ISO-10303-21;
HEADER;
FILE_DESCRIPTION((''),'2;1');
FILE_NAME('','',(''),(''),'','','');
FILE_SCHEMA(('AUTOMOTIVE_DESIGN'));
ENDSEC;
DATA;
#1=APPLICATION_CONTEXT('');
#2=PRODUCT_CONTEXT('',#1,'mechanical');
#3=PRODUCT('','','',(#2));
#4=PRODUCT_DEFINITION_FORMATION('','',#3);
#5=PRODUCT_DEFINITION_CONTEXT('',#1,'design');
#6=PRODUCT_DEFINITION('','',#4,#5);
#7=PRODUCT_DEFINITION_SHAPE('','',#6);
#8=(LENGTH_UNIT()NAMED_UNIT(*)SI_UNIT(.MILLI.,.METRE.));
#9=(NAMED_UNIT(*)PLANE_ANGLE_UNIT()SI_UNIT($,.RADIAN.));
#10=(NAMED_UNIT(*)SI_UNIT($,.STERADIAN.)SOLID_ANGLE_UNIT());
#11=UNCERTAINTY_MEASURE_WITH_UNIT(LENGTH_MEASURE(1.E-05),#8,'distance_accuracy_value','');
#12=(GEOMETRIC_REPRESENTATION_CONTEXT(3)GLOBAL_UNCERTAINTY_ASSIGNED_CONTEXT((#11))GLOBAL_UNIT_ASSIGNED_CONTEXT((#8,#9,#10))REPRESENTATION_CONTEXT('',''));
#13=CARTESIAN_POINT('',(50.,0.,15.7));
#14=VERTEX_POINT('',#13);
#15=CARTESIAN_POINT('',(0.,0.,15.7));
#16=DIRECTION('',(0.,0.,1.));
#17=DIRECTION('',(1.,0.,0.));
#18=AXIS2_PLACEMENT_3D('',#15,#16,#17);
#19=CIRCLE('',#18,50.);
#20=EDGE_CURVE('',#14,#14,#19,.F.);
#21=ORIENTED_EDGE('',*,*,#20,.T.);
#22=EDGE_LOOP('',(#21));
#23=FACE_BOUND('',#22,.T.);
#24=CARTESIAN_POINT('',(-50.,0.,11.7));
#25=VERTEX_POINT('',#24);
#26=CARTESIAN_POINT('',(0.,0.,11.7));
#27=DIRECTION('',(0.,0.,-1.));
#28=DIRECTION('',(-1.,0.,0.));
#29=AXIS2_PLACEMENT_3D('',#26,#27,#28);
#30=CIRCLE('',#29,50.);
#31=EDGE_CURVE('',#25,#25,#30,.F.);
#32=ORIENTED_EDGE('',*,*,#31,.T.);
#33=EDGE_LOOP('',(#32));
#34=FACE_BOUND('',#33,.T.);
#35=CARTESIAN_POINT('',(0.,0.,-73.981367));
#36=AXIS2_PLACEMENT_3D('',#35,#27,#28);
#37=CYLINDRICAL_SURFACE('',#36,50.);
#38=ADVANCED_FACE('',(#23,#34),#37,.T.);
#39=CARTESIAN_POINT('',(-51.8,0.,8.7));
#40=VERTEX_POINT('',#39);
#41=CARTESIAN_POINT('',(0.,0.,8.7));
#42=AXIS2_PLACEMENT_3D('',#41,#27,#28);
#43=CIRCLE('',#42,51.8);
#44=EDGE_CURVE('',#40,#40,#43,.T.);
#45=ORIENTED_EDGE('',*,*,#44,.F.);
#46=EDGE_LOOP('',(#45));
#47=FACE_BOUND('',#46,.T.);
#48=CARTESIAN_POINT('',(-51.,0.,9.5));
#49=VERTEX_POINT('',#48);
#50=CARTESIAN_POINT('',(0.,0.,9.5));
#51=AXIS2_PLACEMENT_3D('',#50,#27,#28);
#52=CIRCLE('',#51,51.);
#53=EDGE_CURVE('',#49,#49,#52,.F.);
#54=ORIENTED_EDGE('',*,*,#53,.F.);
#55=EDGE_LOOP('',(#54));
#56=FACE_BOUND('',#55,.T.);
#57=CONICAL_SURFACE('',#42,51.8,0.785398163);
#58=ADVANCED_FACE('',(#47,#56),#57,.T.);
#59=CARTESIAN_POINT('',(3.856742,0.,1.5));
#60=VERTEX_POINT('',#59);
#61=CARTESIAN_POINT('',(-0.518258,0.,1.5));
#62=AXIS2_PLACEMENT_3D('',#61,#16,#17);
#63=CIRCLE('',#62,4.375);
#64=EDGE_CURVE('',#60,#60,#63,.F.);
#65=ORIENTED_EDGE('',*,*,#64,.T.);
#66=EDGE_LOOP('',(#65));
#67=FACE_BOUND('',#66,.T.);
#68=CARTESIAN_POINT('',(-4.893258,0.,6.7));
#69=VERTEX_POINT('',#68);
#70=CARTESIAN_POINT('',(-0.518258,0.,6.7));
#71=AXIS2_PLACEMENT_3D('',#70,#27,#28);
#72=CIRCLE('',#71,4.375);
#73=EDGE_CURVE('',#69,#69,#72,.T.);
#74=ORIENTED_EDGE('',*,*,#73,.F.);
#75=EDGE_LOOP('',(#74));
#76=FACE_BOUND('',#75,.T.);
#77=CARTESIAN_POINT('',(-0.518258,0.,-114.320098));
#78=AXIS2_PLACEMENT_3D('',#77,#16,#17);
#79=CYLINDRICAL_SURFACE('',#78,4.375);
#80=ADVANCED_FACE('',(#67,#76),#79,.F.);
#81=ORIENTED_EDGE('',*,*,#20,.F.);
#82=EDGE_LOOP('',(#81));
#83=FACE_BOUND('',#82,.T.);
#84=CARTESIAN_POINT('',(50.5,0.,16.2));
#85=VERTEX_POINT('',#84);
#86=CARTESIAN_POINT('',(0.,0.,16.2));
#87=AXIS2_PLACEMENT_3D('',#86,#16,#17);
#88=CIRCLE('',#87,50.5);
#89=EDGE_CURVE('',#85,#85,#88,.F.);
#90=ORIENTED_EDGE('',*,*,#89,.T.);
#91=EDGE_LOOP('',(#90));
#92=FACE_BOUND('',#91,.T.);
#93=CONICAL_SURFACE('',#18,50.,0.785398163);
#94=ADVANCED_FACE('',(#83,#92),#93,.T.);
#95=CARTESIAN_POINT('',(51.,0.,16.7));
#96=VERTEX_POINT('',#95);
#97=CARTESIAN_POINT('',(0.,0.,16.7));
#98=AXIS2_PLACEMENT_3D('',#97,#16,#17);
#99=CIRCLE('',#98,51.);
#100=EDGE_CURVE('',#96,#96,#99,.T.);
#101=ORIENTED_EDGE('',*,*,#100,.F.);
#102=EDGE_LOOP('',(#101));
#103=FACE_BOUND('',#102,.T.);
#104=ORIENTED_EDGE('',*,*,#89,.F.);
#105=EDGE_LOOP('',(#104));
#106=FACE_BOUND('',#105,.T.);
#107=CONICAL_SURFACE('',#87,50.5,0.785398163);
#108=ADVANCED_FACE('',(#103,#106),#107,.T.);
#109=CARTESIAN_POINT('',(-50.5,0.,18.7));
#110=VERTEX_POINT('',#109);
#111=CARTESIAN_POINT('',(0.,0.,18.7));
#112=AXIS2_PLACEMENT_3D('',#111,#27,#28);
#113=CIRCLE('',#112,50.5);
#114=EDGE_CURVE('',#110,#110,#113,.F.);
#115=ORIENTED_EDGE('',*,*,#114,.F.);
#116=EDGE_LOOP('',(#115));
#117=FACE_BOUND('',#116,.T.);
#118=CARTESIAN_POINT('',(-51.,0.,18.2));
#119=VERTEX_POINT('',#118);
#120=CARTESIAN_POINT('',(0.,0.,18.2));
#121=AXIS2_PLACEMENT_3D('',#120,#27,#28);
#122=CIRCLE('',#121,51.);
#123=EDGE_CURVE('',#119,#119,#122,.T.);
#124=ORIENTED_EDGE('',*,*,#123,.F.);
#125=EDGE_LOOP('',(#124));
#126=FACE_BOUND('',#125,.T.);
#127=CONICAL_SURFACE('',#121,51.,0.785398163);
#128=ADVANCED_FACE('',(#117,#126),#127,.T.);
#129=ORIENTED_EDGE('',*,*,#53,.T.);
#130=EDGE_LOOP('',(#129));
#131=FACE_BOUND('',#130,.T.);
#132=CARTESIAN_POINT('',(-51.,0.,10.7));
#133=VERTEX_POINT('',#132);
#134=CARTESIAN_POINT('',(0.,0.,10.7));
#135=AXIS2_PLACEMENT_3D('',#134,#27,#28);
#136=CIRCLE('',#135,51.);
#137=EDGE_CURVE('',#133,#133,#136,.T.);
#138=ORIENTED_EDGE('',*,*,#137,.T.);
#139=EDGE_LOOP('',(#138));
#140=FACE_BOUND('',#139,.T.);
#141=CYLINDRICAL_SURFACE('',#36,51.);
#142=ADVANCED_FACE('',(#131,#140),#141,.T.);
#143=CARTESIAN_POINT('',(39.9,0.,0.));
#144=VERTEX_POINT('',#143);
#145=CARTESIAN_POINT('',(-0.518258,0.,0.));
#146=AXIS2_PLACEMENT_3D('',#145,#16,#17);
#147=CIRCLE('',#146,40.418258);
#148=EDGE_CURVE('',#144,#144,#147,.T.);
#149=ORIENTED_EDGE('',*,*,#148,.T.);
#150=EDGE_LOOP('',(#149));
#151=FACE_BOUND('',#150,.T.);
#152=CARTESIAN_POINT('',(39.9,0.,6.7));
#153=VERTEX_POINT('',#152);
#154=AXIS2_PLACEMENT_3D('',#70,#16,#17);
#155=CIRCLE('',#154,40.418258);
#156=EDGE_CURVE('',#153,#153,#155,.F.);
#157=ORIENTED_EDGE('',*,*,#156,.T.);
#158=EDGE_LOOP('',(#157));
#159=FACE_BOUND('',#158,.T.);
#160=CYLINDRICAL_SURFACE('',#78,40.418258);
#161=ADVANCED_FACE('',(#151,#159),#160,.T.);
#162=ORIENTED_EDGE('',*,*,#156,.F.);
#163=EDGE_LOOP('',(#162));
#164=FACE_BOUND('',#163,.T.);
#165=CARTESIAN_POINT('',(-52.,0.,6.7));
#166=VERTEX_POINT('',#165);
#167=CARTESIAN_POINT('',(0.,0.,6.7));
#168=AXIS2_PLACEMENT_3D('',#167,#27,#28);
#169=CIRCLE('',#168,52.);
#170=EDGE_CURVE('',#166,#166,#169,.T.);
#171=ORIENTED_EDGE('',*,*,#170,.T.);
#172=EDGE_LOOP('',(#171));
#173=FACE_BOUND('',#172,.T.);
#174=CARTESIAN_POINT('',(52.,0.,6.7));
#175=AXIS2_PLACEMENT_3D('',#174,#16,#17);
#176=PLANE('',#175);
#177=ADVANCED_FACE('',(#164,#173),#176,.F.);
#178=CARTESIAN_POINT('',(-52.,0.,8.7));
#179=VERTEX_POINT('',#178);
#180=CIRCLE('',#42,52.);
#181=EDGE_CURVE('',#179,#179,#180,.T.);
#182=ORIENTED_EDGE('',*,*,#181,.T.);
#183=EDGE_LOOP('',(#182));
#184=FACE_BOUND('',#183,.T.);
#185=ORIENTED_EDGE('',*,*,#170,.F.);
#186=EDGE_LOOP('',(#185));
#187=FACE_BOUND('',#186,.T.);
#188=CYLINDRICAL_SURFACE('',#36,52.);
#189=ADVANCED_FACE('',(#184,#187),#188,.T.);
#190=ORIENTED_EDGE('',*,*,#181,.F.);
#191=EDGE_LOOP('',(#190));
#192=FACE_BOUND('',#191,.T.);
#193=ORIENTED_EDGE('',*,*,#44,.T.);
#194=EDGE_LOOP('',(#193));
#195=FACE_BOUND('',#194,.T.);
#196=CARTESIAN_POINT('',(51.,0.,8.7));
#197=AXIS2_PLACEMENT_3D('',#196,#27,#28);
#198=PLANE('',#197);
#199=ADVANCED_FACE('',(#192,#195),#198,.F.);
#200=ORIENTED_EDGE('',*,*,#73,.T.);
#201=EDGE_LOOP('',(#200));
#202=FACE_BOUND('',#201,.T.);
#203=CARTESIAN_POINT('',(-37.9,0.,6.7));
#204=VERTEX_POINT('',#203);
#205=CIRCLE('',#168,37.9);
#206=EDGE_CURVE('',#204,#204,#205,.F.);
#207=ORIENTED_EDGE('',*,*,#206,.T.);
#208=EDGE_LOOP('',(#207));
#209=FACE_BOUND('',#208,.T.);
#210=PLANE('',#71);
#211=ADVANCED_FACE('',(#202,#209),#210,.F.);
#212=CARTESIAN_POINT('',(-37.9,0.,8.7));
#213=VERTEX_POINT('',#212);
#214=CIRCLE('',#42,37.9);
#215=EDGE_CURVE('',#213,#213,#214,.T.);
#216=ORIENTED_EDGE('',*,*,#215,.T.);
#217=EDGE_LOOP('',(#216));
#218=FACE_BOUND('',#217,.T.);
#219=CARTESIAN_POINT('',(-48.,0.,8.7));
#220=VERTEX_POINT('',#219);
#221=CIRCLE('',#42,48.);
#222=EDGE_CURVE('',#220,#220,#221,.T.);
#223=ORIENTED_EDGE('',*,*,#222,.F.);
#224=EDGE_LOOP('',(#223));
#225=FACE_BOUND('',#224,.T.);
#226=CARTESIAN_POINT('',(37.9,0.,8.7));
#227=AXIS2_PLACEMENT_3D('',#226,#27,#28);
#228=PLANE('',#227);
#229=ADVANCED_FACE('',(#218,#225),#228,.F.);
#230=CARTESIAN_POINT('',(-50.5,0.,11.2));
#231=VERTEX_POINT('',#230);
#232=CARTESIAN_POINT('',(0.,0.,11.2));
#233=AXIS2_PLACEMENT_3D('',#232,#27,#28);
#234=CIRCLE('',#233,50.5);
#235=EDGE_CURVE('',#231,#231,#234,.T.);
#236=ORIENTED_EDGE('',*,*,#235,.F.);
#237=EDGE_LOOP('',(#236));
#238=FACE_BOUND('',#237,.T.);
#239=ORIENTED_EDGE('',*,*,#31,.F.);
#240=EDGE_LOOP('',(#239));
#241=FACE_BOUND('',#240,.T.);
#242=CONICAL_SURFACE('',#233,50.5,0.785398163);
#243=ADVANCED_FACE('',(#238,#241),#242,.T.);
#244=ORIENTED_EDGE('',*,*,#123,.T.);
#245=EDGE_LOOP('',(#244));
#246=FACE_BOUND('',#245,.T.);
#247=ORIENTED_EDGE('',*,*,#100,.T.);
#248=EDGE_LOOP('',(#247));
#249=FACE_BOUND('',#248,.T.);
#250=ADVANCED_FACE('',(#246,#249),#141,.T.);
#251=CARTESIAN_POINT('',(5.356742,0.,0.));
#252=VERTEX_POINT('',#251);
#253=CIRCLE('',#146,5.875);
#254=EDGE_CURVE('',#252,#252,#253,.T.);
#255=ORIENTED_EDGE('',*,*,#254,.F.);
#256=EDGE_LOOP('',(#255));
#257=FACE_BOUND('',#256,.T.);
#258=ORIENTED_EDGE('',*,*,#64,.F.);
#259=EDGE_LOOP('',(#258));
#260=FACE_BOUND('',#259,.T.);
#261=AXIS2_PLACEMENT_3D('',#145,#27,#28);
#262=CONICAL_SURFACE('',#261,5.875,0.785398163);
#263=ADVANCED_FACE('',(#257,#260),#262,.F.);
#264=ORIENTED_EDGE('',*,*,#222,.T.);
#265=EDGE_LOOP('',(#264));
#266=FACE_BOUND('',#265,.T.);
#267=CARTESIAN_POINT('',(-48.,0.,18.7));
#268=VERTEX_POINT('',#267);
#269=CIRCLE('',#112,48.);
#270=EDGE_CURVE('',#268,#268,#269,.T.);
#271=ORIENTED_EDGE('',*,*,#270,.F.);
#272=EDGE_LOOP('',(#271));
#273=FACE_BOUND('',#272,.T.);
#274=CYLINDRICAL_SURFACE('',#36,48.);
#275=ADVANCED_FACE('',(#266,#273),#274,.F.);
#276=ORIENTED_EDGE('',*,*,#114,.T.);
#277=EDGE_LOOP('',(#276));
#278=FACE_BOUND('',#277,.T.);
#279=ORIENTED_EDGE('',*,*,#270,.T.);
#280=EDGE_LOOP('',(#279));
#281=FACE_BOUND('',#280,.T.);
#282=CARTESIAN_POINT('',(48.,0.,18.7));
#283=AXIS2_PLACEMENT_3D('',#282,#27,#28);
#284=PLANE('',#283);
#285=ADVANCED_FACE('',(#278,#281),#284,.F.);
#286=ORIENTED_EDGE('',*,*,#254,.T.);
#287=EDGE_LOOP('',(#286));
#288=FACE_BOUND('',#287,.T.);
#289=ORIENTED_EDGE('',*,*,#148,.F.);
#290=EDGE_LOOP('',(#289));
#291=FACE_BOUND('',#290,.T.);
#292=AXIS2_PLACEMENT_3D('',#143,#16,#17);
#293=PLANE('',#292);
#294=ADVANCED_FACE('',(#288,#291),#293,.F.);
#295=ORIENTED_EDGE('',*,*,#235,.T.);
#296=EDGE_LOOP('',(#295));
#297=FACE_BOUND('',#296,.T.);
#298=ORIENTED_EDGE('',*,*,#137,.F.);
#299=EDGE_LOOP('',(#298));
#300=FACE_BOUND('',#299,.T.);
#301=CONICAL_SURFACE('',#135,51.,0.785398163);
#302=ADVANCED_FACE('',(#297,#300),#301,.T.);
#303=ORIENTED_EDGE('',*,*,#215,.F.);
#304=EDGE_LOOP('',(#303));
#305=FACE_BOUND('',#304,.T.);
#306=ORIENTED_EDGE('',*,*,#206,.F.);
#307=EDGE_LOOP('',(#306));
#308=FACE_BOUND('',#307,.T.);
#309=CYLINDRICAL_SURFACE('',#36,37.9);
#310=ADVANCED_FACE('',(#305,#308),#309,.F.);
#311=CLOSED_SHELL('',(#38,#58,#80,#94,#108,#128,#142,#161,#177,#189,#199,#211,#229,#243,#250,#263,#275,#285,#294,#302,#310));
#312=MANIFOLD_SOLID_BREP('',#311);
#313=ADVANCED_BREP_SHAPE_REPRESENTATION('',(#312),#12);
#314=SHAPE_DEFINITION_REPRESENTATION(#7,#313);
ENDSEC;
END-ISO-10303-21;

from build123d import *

# Parameters (mm, degrees)
CHAMFER1_SIZE       = 0.5
CHAMFER2_SIZE       = 0.8
SKETCH3_R           = 40.418258265
SKETCH3_R_2         = 4.375
BOSS_EXTRUDE1_DEPTH = 6.7
CHAMFER3_SIZE       = 1.5


with BuildPart() as part:
    # Sketch1 → Revolve1 (revolve)
    with BuildSketch(Plane(origin=(0, 0, 0), x_dir=(1, 0, 0), z_dir=(0, 1, 0)), mode=Mode.PRIVATE) as revolve1_sk:
        Polygon((37.9, 0), (37.9, -8.7), (48, -8.7), (48, -18.7), (51, -18.7), (51, -16.2), (50, -16.2), (50, -11.2), (51, -11.2), (51, -8.7), (52, -8.7), (52, -6.7), (39.9, -6.7), (39.9, 0), align=None)
    revolve(revolve1_sk.sketch.rotate(Axis((0, 0, -73.981367368), (0, 0, 1)), 180), axis=Axis((0, 0, -73.981367368), (0, 0, 1)))

    # Chamfer1
    chamfer1_edges = [part.edges().sort_by_distance(p)[0] for p in [
        (51, 0, 11.2),
        (50, 0, 11.2),
        (50, 0, 16.2),
        (51, 0, 16.2),
        (51, 0, 18.7),
        (39.9, 0, 0),
    ]]
    chamfer(chamfer1_edges, length=CHAMFER1_SIZE - 0.0001)  # a hair under: the kernel refuses the full size

    # Chamfer2
    chamfer2_edges = [part.edges().sort_by_distance(p)[0] for p in [
        (51, 0, 8.7),
    ]]
    chamfer(chamfer2_edges, length=CHAMFER2_SIZE)

    # Sketch3 → Boss-Extrude1 (add)
    with BuildSketch(Plane(origin=(0, 0, 6.7), x_dir=(-1, 0, 0), z_dir=(0, 0, -1))):
        with Locations(Location((0.518258265, 0, 0), (0, 0, 180))):
            Circle(SKETCH3_R)
        with Locations(Location((0.518258265, 0, 0), (0, 0, 180))):
            Circle(SKETCH3_R_2, mode=Mode.SUBTRACT)
    extrude(amount=BOSS_EXTRUDE1_DEPTH)

    # Chamfer3
    chamfer3_edges = [part.edges().sort_by_distance(p)[0] for p in [
        (-4.893258265, 0, 0),
    ]]
    chamfer(chamfer3_edges, length=CHAMFER3_SIZE)


solid = part.part
